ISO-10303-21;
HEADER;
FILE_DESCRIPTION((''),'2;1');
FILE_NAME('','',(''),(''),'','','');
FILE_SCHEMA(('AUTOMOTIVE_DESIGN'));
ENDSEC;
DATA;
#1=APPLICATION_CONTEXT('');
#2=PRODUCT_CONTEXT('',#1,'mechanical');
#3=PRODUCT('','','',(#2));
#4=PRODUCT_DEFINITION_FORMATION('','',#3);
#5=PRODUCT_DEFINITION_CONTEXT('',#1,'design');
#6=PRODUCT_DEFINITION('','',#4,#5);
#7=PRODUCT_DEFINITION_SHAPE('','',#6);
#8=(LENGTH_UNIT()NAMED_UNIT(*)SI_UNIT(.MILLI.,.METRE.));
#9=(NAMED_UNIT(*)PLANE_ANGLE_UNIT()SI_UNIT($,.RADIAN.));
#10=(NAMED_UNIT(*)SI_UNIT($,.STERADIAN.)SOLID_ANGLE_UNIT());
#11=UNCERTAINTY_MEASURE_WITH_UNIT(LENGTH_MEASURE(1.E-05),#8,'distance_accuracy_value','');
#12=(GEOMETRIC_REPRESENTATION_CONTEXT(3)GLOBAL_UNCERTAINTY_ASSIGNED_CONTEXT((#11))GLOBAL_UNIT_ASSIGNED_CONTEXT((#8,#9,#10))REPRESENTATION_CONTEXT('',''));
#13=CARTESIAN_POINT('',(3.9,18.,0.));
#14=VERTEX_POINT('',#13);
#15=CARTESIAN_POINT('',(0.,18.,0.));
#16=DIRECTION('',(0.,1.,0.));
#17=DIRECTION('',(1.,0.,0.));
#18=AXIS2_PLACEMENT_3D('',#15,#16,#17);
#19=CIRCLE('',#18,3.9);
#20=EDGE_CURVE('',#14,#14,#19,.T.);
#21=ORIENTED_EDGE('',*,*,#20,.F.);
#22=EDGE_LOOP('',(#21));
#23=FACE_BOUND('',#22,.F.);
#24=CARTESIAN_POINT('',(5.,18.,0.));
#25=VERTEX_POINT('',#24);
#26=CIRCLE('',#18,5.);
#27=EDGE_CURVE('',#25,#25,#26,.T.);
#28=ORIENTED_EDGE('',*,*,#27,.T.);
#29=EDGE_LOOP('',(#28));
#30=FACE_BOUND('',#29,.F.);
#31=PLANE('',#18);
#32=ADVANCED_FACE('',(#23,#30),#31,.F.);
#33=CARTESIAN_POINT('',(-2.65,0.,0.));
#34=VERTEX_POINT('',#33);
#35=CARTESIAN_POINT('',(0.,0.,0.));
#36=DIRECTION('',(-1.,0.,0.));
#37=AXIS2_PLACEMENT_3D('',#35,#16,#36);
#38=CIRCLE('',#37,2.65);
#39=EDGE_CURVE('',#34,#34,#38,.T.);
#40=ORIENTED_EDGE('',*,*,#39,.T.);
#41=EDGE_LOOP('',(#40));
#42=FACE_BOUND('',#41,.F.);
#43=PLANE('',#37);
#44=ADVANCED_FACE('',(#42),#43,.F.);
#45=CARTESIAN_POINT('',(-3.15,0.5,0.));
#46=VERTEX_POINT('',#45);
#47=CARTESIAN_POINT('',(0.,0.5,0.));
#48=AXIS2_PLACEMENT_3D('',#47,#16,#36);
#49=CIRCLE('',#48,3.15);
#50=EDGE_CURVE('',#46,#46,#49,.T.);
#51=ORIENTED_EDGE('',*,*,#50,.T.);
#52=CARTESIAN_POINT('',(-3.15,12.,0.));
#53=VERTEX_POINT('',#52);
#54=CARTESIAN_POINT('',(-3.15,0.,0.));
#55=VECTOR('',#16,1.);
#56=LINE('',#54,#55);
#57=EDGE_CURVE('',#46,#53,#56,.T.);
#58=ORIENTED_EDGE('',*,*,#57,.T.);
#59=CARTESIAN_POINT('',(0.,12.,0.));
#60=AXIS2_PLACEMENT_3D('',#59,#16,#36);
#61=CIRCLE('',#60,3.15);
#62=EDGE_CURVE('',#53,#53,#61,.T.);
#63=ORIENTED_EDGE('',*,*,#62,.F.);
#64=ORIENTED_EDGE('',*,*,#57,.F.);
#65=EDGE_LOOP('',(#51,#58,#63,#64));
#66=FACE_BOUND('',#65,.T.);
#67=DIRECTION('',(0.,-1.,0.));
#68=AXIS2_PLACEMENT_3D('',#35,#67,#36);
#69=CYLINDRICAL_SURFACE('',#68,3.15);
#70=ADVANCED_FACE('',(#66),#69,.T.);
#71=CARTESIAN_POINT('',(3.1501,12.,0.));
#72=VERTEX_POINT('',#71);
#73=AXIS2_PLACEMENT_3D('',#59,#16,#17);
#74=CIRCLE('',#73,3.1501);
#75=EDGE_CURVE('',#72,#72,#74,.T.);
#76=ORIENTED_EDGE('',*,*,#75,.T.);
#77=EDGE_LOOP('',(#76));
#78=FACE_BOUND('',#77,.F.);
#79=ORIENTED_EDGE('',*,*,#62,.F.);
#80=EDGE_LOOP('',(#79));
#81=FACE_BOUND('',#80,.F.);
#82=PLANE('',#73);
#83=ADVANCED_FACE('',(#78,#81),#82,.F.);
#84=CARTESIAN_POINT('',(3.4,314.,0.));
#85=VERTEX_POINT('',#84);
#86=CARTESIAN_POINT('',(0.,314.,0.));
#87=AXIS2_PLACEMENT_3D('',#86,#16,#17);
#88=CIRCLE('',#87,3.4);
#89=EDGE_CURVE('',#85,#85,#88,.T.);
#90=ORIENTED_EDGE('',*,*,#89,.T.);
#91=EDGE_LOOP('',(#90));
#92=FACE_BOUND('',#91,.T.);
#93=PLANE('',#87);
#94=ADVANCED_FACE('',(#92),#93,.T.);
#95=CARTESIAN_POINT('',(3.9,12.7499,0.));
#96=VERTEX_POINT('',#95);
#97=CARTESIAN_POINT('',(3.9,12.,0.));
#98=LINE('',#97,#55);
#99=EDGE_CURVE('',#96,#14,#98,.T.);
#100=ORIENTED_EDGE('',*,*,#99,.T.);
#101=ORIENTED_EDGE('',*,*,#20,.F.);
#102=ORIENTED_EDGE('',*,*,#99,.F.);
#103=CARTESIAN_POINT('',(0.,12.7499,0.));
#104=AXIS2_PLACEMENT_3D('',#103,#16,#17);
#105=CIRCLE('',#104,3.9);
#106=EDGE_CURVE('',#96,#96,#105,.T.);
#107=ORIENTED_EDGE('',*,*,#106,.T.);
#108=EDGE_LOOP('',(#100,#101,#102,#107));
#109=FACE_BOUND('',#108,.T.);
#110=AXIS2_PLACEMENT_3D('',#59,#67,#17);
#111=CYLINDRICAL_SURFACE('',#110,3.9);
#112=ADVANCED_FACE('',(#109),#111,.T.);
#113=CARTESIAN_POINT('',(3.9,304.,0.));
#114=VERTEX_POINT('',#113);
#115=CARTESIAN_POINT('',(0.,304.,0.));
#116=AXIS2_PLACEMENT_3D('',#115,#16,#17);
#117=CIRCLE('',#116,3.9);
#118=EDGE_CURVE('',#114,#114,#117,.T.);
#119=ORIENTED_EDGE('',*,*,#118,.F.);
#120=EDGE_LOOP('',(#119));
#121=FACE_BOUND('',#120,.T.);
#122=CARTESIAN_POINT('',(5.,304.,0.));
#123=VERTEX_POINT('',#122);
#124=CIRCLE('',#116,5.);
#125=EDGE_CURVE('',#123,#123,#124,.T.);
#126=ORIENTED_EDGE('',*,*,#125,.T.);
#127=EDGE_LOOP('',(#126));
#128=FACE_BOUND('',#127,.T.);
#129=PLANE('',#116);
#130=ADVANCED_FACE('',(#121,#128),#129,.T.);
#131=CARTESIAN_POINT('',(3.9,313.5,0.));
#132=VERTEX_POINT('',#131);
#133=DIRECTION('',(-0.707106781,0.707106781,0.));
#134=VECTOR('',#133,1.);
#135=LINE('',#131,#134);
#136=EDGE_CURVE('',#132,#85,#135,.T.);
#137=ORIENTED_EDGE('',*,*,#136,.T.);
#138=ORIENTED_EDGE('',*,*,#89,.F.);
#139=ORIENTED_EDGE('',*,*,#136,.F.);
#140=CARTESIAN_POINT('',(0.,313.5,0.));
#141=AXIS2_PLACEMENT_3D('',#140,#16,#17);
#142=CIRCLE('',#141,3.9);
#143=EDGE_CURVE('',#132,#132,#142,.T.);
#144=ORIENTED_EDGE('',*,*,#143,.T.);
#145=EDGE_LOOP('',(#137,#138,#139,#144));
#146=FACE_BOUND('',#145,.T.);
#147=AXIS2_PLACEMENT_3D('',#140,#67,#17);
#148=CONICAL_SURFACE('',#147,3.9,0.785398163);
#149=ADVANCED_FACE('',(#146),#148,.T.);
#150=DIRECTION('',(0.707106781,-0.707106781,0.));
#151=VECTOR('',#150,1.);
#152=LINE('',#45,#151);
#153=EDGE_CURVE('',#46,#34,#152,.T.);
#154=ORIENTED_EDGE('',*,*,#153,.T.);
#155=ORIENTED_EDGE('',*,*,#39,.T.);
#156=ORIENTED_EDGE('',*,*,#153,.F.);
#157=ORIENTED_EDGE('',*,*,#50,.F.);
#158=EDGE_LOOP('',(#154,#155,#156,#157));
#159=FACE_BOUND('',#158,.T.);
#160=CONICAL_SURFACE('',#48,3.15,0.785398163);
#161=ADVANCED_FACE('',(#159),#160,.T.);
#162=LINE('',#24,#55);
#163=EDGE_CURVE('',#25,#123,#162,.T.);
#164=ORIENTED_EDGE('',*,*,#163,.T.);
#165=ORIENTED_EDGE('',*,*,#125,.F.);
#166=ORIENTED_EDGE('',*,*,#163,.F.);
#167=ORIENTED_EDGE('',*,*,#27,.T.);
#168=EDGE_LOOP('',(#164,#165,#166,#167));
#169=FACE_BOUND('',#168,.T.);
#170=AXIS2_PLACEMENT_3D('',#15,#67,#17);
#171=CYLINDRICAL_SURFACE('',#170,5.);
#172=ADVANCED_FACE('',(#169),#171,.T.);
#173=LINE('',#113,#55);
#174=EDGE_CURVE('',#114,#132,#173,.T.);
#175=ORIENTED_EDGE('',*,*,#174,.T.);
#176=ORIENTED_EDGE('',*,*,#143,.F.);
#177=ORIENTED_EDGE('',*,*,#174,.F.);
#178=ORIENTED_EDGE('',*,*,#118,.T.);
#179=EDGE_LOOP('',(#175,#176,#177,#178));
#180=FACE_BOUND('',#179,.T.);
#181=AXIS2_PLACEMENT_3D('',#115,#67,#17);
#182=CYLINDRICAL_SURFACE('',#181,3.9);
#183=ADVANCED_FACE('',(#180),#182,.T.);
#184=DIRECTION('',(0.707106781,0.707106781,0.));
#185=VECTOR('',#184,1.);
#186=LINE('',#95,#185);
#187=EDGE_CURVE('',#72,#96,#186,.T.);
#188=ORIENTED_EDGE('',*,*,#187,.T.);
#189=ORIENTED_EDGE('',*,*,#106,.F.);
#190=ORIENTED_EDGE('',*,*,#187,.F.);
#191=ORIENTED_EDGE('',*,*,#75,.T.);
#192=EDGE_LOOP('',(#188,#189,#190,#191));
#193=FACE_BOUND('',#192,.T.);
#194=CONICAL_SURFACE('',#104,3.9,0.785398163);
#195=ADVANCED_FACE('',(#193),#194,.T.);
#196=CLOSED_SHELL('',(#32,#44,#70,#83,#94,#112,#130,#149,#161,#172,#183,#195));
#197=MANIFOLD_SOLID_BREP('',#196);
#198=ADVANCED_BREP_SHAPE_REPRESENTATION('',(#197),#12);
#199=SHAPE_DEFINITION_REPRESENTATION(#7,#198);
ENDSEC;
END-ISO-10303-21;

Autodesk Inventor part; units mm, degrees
ref_plane "YZ Plane" through (0, 0, 0) normal (1, 0, 0) x (0, 1, 0)
ref_plane "XZ Plane" through (0, 0, 0) normal (0, 1, 0) x (-1, 0, 0)
ref_plane "XY Plane" through (0, 0, 0) normal (0, 0, 1) x (1, 0, 0)
sketch "Sketch1" plane through (0, 0, 0) normal (0, 1, 0) x (-1, 0, 0)
  circle A0 centre (0, 0) radius 3.15
  dimension "d0" = 6.3
extrude "Extrusion1" add sketch "Sketch1" along normal blind 12
sketch "Sketch2" plane through (0, 12, 0) normal (0, 1, 0) x (1, 0, 0)
  circle A0 centre (0, 0) radius 3.15 projected
  circle A1 centre (0, 0) radius 3.9
  dimension "d3" = 7.8
extrude "Extrusion2" add sketch "Sketch2" along normal blind 6 contours A0 | A1
chamfer "Chamfer1" distance 0.75 angle 45 1 edges at (-3.9, 12, 0)
sketch "Sketch3" plane through (0, 18, 0) normal (0, 1, 0) x (1, 0, 0)
  circle A0 centre (0, 0) radius 3.9 projected
  circle A1 centre (0, 0) radius 5
  dimension "d9" = 10
extrude "Extrusion3" add sketch "Sketch3" along normal blind 286 contours A0 | A1
sketch "Sketch4" plane through (0, 304, 0) normal (0, 1, 0) x (1, 0, 0)
  circle A0 centre (0, 0) radius 5 projected
  circle A1 centre (0, 0) radius 3.9
  dimension "d12" = 7.8
extrude "Extrusion4" add sketch "Sketch4" along normal blind 10 contours A1
chamfer "Chamfer2" distance 0.5 angle 45 2 edges at (-3.9, 314, 0) (3.15, 0, 0)
thread "Thread1" size "TR10x2" class "7e" standard "ISO Metric Trapezoidal Threads" full length
properties part number "ZACMEScrew" material "Steel"
